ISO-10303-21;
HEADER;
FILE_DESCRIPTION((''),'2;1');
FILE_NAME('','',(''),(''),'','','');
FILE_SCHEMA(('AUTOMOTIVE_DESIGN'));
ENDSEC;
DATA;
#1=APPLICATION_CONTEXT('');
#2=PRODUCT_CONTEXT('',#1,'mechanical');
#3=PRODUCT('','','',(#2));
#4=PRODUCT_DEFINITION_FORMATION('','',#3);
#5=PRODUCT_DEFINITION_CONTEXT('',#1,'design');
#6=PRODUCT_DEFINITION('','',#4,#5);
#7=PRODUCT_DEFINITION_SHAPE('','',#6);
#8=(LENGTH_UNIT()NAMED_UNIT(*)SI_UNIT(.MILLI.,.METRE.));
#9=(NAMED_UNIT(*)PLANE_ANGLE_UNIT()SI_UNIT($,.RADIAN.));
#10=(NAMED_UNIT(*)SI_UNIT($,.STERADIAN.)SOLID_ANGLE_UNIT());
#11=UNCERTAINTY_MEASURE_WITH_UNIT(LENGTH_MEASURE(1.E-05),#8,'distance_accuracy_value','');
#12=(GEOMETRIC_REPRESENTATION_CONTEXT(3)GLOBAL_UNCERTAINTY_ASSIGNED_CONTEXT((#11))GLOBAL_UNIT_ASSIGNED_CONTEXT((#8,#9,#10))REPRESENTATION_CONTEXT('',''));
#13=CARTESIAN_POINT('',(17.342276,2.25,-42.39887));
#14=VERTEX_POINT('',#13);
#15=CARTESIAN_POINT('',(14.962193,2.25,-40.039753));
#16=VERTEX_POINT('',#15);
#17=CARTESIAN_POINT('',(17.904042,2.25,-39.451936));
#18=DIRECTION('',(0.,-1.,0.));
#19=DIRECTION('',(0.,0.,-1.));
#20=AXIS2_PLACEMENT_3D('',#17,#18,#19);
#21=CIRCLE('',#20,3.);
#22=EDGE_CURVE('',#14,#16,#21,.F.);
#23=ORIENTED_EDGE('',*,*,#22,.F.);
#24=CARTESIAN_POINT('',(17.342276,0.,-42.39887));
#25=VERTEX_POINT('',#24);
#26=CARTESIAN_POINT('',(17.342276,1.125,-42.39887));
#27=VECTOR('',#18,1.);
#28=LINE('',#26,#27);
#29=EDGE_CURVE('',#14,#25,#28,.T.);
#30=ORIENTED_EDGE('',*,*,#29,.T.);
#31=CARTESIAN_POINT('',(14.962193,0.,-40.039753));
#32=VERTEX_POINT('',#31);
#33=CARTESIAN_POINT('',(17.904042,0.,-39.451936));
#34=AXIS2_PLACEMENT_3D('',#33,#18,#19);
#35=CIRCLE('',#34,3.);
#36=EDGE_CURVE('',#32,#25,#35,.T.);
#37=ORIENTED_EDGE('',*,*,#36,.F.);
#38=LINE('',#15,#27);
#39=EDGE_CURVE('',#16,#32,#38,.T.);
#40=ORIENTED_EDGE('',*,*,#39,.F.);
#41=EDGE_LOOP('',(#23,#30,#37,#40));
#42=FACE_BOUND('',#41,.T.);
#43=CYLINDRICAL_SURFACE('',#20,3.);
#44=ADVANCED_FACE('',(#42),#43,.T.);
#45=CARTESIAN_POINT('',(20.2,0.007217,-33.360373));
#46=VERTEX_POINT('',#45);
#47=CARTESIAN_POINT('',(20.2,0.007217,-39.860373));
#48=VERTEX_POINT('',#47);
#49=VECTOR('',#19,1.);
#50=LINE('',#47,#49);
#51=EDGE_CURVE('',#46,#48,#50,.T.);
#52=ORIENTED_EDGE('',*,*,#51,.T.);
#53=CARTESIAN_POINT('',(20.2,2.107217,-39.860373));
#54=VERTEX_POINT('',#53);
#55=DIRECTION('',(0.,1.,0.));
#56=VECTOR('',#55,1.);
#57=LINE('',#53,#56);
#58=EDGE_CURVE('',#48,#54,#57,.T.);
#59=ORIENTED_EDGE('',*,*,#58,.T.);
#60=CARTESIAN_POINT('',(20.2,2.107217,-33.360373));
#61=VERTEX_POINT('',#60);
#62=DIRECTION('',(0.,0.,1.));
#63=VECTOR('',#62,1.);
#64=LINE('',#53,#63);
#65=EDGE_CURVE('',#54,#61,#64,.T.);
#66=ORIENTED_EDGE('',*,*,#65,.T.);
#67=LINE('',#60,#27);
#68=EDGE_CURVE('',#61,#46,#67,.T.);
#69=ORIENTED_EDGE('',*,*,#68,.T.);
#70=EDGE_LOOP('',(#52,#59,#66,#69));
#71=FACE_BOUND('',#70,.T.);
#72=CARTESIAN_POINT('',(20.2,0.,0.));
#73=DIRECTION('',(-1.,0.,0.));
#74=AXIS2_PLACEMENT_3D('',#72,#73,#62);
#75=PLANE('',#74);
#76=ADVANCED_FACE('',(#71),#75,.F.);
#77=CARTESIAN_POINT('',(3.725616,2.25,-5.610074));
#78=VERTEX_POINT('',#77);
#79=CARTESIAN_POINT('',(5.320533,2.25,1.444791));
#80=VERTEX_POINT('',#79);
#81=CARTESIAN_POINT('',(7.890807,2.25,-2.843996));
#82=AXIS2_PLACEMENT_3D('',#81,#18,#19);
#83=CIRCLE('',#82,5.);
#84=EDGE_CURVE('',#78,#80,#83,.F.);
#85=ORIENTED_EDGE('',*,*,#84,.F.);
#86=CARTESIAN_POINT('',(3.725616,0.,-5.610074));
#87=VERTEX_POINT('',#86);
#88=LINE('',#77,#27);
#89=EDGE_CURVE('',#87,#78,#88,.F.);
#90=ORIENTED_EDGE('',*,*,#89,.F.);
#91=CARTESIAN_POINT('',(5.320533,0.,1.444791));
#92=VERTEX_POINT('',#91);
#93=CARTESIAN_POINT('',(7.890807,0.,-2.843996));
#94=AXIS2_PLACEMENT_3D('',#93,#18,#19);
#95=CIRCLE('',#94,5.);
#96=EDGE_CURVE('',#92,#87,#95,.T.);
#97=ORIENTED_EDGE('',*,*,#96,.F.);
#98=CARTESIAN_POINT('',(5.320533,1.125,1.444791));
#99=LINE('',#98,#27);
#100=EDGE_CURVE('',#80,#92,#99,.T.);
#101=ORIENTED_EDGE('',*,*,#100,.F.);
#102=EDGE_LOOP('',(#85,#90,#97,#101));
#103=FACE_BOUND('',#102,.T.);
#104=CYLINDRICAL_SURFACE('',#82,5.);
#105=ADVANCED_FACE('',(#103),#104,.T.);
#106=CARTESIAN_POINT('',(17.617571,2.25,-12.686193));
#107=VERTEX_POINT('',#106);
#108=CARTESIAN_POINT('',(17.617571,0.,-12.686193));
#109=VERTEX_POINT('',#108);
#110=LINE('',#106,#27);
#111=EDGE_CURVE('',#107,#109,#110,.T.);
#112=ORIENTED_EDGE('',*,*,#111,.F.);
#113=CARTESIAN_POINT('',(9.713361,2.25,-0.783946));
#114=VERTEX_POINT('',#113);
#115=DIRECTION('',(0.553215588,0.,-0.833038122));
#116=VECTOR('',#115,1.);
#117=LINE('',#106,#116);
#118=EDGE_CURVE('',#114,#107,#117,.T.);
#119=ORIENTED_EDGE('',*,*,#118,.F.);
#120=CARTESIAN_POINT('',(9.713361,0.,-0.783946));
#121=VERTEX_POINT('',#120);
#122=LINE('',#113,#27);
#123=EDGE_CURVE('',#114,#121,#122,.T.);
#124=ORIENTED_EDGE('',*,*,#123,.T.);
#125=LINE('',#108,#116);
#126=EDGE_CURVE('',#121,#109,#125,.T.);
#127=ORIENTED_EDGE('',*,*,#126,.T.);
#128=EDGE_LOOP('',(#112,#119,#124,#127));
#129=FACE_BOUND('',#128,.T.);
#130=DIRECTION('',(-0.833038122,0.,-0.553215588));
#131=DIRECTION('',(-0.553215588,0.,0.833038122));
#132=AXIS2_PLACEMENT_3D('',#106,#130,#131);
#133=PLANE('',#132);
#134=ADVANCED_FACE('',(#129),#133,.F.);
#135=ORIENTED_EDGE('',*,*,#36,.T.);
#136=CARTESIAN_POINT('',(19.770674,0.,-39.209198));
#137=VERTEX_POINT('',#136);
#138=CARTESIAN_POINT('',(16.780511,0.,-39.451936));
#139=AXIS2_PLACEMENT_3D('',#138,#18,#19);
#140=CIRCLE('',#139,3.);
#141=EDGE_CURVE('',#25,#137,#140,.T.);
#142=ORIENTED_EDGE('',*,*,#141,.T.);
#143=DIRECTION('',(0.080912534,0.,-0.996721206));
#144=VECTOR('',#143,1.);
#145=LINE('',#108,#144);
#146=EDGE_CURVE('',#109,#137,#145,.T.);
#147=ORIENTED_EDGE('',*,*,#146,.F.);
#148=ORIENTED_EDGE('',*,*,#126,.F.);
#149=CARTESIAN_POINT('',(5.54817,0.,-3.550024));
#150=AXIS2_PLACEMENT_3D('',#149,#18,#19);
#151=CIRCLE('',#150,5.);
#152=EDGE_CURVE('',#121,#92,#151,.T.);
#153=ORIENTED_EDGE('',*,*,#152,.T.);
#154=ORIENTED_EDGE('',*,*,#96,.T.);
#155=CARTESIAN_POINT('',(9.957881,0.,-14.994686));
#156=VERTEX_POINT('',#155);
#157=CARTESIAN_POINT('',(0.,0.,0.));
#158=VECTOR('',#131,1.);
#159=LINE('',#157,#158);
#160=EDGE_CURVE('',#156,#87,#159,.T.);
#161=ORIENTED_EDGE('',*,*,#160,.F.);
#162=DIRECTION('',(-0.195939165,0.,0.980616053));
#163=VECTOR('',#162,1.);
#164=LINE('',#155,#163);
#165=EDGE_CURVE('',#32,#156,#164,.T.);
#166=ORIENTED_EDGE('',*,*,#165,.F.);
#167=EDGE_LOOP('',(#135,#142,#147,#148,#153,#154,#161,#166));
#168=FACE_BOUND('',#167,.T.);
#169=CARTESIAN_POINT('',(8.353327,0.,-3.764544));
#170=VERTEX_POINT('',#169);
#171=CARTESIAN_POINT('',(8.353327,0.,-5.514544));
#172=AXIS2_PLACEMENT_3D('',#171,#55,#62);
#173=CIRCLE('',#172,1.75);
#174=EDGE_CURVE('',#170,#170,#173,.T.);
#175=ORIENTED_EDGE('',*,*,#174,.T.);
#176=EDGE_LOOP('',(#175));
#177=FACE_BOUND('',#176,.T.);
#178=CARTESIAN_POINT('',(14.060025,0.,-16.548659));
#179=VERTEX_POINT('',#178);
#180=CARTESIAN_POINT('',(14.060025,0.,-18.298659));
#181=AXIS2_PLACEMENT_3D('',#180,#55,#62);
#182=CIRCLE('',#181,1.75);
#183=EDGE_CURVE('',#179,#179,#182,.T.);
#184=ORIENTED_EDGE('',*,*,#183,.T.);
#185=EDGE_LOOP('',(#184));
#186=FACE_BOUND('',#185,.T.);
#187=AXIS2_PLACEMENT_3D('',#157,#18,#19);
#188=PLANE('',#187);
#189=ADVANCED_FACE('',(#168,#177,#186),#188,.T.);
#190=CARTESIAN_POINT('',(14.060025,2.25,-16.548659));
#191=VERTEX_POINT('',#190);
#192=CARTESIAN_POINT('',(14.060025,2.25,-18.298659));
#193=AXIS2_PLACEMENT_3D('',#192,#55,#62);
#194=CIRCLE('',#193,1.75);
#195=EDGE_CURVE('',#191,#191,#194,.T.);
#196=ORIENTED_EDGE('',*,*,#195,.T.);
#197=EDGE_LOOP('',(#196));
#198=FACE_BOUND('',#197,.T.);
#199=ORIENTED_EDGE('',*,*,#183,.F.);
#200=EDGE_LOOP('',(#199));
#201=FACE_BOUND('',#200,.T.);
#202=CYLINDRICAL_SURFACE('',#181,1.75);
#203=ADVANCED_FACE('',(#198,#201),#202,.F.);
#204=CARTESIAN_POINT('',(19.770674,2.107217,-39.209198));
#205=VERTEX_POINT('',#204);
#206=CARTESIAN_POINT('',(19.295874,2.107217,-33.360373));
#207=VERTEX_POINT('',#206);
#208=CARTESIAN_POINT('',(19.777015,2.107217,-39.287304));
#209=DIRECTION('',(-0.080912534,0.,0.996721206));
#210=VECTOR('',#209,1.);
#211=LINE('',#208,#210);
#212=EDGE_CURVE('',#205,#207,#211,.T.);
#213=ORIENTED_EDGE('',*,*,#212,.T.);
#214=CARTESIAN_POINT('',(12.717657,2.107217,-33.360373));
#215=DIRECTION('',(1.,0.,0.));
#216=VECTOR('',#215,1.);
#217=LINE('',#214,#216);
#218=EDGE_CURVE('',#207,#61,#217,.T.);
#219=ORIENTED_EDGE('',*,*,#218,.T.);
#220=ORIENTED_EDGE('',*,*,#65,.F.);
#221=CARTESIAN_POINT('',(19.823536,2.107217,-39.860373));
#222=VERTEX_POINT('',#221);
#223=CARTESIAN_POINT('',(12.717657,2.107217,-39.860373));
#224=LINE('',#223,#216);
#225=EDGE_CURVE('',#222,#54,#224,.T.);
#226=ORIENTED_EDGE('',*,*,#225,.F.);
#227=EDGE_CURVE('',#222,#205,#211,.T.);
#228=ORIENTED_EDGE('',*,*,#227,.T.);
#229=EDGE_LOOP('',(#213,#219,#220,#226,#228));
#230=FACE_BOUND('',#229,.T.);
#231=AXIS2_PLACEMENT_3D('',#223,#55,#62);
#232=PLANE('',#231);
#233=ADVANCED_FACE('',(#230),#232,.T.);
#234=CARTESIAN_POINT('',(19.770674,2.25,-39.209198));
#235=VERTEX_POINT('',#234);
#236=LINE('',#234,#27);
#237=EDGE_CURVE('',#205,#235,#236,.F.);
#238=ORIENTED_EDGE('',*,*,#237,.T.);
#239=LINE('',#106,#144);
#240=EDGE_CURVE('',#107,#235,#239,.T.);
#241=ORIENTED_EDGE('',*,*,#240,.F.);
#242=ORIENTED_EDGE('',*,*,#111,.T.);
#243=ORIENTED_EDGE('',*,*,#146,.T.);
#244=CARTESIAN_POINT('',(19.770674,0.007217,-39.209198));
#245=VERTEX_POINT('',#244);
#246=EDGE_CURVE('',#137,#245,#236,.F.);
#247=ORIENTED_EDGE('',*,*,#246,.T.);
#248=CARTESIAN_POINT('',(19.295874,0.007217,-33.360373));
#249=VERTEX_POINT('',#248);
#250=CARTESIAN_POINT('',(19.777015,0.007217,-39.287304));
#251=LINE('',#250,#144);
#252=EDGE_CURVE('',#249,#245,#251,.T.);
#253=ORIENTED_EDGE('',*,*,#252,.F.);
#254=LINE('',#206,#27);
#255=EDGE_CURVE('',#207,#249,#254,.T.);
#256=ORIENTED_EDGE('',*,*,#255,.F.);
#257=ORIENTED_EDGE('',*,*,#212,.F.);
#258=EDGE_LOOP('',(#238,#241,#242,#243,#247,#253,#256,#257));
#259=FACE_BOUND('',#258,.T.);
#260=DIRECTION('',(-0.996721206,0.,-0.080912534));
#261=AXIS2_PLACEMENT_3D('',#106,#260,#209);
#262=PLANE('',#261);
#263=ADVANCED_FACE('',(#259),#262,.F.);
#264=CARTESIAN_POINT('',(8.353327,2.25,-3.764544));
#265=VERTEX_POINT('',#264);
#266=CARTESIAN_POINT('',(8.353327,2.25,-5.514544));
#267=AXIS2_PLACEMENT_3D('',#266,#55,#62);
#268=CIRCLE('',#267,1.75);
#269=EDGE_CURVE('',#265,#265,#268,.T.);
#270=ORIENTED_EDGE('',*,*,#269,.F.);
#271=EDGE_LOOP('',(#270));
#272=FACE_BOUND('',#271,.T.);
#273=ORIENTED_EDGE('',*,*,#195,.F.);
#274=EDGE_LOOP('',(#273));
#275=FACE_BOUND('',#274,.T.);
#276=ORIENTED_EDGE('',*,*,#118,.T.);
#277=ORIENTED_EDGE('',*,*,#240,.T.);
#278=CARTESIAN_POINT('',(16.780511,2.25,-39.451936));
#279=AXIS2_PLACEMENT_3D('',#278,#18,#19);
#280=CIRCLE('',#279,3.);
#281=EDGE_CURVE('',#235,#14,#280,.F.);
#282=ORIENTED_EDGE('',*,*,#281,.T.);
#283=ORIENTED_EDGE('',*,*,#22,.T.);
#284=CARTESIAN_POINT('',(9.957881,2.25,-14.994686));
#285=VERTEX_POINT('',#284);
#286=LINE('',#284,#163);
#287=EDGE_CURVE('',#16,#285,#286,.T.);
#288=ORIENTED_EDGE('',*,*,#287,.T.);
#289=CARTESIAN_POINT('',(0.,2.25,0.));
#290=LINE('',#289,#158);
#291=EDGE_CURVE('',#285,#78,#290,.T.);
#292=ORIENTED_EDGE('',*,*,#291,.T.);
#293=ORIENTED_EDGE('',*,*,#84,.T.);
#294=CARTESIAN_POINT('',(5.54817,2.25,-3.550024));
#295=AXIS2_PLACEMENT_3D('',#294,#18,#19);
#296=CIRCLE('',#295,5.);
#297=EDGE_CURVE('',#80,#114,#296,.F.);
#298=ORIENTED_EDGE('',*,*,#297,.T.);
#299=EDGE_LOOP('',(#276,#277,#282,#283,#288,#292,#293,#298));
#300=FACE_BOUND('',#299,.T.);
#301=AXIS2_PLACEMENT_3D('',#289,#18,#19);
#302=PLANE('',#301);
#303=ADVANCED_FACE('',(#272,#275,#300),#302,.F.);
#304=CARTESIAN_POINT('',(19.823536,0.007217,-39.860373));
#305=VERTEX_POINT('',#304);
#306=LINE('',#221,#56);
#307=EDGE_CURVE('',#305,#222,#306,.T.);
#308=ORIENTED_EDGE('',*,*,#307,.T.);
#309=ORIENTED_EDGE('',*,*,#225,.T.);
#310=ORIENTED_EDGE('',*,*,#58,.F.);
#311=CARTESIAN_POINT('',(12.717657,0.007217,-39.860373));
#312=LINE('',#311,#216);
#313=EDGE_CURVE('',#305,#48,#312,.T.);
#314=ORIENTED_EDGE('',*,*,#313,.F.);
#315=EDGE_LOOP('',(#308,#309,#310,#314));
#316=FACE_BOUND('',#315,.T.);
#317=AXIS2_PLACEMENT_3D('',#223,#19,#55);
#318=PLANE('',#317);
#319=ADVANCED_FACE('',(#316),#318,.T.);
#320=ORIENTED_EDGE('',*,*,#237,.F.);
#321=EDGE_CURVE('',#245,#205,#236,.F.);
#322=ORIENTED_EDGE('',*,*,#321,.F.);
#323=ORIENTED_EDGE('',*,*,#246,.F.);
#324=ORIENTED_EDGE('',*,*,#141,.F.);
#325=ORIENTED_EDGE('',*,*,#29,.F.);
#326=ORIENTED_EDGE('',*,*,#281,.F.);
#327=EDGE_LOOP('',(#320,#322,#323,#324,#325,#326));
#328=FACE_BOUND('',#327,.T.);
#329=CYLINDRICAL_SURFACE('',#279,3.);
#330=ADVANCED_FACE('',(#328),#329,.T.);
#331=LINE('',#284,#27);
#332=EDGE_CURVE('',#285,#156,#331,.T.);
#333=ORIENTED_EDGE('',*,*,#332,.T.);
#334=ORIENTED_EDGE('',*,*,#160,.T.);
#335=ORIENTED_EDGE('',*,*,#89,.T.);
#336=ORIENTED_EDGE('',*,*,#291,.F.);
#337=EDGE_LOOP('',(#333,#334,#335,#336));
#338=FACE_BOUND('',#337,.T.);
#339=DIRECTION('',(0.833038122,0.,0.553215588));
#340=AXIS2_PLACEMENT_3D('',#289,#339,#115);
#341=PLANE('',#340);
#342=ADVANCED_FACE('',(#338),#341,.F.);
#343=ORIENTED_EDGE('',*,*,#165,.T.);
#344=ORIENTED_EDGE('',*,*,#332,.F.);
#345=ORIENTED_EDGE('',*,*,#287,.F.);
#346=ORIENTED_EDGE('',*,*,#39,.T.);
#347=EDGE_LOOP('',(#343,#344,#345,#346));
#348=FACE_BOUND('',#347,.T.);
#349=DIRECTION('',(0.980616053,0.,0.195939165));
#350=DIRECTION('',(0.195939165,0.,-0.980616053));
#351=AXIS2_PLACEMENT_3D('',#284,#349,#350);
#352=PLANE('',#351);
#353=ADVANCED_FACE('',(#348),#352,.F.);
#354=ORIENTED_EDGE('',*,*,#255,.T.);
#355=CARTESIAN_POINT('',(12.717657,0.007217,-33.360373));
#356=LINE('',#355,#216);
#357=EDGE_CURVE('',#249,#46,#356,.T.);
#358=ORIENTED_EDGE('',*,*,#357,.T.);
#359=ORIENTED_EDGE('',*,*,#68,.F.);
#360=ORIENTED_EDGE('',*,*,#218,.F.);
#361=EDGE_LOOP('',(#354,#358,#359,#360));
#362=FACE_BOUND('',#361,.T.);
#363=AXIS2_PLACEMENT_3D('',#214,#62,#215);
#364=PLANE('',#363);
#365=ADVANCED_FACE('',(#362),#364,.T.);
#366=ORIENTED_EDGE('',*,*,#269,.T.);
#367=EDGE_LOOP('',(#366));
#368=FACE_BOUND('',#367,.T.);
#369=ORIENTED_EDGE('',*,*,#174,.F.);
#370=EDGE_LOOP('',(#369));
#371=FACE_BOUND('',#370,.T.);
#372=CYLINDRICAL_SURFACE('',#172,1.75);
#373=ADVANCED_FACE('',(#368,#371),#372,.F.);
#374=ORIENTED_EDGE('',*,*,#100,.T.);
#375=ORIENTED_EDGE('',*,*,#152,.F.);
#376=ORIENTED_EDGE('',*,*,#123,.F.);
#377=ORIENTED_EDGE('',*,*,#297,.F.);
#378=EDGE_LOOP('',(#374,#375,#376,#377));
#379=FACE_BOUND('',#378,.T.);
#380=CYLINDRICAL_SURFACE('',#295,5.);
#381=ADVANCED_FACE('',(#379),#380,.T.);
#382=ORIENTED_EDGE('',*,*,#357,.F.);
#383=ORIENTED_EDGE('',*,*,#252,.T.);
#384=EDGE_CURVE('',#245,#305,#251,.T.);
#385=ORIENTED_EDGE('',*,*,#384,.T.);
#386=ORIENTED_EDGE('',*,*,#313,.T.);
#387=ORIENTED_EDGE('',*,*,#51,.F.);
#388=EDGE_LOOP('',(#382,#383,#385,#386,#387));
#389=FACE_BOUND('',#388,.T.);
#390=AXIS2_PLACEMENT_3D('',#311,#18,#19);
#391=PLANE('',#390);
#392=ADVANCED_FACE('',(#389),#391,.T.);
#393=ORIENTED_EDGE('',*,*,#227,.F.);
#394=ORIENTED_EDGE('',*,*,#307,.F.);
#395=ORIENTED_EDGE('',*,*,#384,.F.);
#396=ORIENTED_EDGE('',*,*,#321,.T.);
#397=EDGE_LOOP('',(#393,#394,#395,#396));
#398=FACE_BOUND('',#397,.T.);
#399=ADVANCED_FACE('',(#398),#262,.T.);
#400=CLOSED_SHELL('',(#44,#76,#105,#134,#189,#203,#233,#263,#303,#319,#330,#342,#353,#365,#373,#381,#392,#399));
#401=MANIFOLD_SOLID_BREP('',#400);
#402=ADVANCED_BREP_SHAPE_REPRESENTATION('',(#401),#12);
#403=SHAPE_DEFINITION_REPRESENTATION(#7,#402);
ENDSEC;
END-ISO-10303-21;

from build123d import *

# Parameters (mm, degrees)
BOSS_EXTRUDE1_DEPTH = 2.25
FILLET1_R           = 5
FILLET2_R           = 3
SKETCH2_R           = 1.75
CUT_EXTRUDE1_DEPTH  = 47.840102946
BOSS_EXTRUDE2_REACH = 40.51
SKETCH4_W           = 6.5
SKETCH4_H           = 2.1
BOSS_EXTRUDE3_REACH = 40.51
SKETCH4_2_W         = 6.5
SKETCH4_2_H         = 2.1


with BuildPart() as part:
    # Sketch1 → Boss-Extrude1 (new body)
    with BuildSketch(Plane(origin=(0, 0, 0), x_dir=(1, 0, 0), z_dir=(0, 1, 0))):
        Polygon((0, 0), (9.957880591, 14.994686196), (15.4441772, 42.451935686), (20.033915457, 42.451935686), (17.6175711, 12.686192897), (7.659690509, -2.308493299), align=None)
    extrude(amount=BOSS_EXTRUDE1_DEPTH)

    # Fillet1
    # the kernel refuses this fillet: 5 mm, written as the material it takes off along each edge
    with BuildSketch(Plane(origin=(7.659690509, -9.280606122, 2.308493299), x_dir=(0.5532155884096079, 0, -0.8330381220212022), z_dir=(0, 1, 0))) as fillet1_piece_1:
        with BuildLine():
            CenterArc((FILLET1_R * 0.742448489754, FILLET1_R), FILLET1_R, 196.816032259, 73.183967741)
            Line((-FILLET1_R * 0.214790094662, FILLET1_R * 0.710700341335), (0, 0))
            Line((0, 0), (FILLET1_R * 0.742448489754, 0))
        make_face()
    extrude(amount=20.811212244, mode=Mode.SUBTRACT)
    with BuildSketch(Plane(origin=(0, -16.83618483, 0), x_dir=(0.5532155884096086, 0, -0.8330381220212018), z_dir=(0, 1, 0))) as fillet1_piece_2:
        with BuildLine():
            CenterArc((FILLET1_R * 1.34689478637, -FILLET1_R), FILLET1_R, 90, 106.816032259)
            Line((FILLET1_R * 0.389656201955, -FILLET1_R * 1.28929965867), (0, 0))
            Line((0, 0), (FILLET1_R * 1.34689478637, 0))
        make_face()
    extrude(amount=35.922369659, mode=Mode.SUBTRACT)

    # Fillet2
    # the kernel refuses this fillet: 3 mm, written as the material it takes off along each edge
    with BuildSketch(Plane(origin=(15.4441772, -6.149660967, -42.451935686), x_dir=(-0.19593916459228597, 0, 0.9806160531925209), z_dir=(0, 1, 0))) as fillet2_piece_1:
        with BuildLine():
            CenterArc((FILLET2_R * 0.819954795549, FILLET2_R), FILLET2_R, 191.29959219, 78.70040781)
            Line((-FILLET2_R * 0.160661257643, FILLET2_R * 0.804060835408), (0, 0))
            Line((0, 0), (FILLET2_R * 0.819954795549, 0))
        make_face()
    extrude(amount=14.549321933, mode=Mode.SUBTRACT)
    with BuildSketch(Plane(origin=(20.033915457, -8.133512114, -42.451935686), x_dir=(-0.08091253350556188, 0, 0.9967212057148735), z_dir=(0, 1, 0))) as fillet2_piece_2:
        with BuildLine():
            CenterArc((FILLET2_R * 1.08446828191, -FILLET2_R), FILLET2_R, 90, 94.641020106)
            Line((FILLET2_R * 0.0877470761958, -FILLET2_R * 1.08091253351), (0, 0))
            Line((0, 0), (FILLET2_R * 1.08446828191, 0))
        make_face()
    extrude(amount=18.517024229, mode=Mode.SUBTRACT)

    # Sketch2 → Cut-Extrude1 (cut, through all)
    with BuildSketch(Plane(origin=(0, 2.25, 0), x_dir=(1, 0, 0), z_dir=(0, 1, 0))):
        with Locations(Location((8.353327454, 5.514543703, 0), (0, 0, 270))):
            Circle(SKETCH2_R)
        with Locations(Location((14.060025472, 18.298658758, 0), (0, 0, 270))):
            Circle(SKETCH2_R)
    extrude(amount=-CUT_EXTRUDE1_DEPTH, mode=Mode.SUBTRACT)

    # Boss-Extrude2: up to this plane
    boss_extrude2_end = Plane(origin=(17.6175711, 2.25, -12.686192897), z_dir=(-0.9967212057148735, 0, -0.0809125335055623))
    # Sketch4 → Boss-Extrude2 (add, up to the surface)
    with BuildSketch(Plane(origin=(20.2, -1.484709168, -8.201879583), x_dir=(0, 0, -1), z_dir=(1, 0, 0)), mode=Mode.PRIVATE) as boss_extrude2_sk1:
        with Locations((28.408493587, 2.541926215)):
            Rectangle(SKETCH4_W, SKETCH4_H)
    boss_extrude2_tool1 = split(extrude(boss_extrude2_sk1.sketch, amount=-BOSS_EXTRUDE2_REACH, mode=Mode.PRIVATE), bisect_by=boss_extrude2_end, keep=Keep.BOTH, mode=Mode.PRIVATE)
    add(boss_extrude2_tool1.solids().sort_by_distance((20.2, 1.057217, -36.610373))[0])

    # Boss-Extrude3: up to this face of the body (flat: up to its plane)
    boss_extrude3_end = Plane(part.part.faces().sort_by_distance((18.476650911, 1.142566407, -23.268769271))[0])
    # Sketch4<2> → Boss-Extrude3 (add, up to the picked face)
    with BuildSketch(Plane(origin=(20.2, -1.484709168, -8.201879583), x_dir=(0, 0, -1), z_dir=(1, 0, 0)), mode=Mode.PRIVATE) as boss_extrude3_sk1:
        with Locations((28.408493587, 2.541926215)):
            Rectangle(SKETCH4_2_W, SKETCH4_2_H)
    boss_extrude3_tool1 = split(extrude(boss_extrude3_sk1.sketch, amount=-BOSS_EXTRUDE3_REACH, mode=Mode.PRIVATE), bisect_by=boss_extrude3_end, keep=Keep.BOTH, mode=Mode.PRIVATE)
    add(boss_extrude3_tool1.solids().sort_by(Axis((20.2, 1.057217, -36.610373), (-1, 0, 0)))[0])


solid = part.part
